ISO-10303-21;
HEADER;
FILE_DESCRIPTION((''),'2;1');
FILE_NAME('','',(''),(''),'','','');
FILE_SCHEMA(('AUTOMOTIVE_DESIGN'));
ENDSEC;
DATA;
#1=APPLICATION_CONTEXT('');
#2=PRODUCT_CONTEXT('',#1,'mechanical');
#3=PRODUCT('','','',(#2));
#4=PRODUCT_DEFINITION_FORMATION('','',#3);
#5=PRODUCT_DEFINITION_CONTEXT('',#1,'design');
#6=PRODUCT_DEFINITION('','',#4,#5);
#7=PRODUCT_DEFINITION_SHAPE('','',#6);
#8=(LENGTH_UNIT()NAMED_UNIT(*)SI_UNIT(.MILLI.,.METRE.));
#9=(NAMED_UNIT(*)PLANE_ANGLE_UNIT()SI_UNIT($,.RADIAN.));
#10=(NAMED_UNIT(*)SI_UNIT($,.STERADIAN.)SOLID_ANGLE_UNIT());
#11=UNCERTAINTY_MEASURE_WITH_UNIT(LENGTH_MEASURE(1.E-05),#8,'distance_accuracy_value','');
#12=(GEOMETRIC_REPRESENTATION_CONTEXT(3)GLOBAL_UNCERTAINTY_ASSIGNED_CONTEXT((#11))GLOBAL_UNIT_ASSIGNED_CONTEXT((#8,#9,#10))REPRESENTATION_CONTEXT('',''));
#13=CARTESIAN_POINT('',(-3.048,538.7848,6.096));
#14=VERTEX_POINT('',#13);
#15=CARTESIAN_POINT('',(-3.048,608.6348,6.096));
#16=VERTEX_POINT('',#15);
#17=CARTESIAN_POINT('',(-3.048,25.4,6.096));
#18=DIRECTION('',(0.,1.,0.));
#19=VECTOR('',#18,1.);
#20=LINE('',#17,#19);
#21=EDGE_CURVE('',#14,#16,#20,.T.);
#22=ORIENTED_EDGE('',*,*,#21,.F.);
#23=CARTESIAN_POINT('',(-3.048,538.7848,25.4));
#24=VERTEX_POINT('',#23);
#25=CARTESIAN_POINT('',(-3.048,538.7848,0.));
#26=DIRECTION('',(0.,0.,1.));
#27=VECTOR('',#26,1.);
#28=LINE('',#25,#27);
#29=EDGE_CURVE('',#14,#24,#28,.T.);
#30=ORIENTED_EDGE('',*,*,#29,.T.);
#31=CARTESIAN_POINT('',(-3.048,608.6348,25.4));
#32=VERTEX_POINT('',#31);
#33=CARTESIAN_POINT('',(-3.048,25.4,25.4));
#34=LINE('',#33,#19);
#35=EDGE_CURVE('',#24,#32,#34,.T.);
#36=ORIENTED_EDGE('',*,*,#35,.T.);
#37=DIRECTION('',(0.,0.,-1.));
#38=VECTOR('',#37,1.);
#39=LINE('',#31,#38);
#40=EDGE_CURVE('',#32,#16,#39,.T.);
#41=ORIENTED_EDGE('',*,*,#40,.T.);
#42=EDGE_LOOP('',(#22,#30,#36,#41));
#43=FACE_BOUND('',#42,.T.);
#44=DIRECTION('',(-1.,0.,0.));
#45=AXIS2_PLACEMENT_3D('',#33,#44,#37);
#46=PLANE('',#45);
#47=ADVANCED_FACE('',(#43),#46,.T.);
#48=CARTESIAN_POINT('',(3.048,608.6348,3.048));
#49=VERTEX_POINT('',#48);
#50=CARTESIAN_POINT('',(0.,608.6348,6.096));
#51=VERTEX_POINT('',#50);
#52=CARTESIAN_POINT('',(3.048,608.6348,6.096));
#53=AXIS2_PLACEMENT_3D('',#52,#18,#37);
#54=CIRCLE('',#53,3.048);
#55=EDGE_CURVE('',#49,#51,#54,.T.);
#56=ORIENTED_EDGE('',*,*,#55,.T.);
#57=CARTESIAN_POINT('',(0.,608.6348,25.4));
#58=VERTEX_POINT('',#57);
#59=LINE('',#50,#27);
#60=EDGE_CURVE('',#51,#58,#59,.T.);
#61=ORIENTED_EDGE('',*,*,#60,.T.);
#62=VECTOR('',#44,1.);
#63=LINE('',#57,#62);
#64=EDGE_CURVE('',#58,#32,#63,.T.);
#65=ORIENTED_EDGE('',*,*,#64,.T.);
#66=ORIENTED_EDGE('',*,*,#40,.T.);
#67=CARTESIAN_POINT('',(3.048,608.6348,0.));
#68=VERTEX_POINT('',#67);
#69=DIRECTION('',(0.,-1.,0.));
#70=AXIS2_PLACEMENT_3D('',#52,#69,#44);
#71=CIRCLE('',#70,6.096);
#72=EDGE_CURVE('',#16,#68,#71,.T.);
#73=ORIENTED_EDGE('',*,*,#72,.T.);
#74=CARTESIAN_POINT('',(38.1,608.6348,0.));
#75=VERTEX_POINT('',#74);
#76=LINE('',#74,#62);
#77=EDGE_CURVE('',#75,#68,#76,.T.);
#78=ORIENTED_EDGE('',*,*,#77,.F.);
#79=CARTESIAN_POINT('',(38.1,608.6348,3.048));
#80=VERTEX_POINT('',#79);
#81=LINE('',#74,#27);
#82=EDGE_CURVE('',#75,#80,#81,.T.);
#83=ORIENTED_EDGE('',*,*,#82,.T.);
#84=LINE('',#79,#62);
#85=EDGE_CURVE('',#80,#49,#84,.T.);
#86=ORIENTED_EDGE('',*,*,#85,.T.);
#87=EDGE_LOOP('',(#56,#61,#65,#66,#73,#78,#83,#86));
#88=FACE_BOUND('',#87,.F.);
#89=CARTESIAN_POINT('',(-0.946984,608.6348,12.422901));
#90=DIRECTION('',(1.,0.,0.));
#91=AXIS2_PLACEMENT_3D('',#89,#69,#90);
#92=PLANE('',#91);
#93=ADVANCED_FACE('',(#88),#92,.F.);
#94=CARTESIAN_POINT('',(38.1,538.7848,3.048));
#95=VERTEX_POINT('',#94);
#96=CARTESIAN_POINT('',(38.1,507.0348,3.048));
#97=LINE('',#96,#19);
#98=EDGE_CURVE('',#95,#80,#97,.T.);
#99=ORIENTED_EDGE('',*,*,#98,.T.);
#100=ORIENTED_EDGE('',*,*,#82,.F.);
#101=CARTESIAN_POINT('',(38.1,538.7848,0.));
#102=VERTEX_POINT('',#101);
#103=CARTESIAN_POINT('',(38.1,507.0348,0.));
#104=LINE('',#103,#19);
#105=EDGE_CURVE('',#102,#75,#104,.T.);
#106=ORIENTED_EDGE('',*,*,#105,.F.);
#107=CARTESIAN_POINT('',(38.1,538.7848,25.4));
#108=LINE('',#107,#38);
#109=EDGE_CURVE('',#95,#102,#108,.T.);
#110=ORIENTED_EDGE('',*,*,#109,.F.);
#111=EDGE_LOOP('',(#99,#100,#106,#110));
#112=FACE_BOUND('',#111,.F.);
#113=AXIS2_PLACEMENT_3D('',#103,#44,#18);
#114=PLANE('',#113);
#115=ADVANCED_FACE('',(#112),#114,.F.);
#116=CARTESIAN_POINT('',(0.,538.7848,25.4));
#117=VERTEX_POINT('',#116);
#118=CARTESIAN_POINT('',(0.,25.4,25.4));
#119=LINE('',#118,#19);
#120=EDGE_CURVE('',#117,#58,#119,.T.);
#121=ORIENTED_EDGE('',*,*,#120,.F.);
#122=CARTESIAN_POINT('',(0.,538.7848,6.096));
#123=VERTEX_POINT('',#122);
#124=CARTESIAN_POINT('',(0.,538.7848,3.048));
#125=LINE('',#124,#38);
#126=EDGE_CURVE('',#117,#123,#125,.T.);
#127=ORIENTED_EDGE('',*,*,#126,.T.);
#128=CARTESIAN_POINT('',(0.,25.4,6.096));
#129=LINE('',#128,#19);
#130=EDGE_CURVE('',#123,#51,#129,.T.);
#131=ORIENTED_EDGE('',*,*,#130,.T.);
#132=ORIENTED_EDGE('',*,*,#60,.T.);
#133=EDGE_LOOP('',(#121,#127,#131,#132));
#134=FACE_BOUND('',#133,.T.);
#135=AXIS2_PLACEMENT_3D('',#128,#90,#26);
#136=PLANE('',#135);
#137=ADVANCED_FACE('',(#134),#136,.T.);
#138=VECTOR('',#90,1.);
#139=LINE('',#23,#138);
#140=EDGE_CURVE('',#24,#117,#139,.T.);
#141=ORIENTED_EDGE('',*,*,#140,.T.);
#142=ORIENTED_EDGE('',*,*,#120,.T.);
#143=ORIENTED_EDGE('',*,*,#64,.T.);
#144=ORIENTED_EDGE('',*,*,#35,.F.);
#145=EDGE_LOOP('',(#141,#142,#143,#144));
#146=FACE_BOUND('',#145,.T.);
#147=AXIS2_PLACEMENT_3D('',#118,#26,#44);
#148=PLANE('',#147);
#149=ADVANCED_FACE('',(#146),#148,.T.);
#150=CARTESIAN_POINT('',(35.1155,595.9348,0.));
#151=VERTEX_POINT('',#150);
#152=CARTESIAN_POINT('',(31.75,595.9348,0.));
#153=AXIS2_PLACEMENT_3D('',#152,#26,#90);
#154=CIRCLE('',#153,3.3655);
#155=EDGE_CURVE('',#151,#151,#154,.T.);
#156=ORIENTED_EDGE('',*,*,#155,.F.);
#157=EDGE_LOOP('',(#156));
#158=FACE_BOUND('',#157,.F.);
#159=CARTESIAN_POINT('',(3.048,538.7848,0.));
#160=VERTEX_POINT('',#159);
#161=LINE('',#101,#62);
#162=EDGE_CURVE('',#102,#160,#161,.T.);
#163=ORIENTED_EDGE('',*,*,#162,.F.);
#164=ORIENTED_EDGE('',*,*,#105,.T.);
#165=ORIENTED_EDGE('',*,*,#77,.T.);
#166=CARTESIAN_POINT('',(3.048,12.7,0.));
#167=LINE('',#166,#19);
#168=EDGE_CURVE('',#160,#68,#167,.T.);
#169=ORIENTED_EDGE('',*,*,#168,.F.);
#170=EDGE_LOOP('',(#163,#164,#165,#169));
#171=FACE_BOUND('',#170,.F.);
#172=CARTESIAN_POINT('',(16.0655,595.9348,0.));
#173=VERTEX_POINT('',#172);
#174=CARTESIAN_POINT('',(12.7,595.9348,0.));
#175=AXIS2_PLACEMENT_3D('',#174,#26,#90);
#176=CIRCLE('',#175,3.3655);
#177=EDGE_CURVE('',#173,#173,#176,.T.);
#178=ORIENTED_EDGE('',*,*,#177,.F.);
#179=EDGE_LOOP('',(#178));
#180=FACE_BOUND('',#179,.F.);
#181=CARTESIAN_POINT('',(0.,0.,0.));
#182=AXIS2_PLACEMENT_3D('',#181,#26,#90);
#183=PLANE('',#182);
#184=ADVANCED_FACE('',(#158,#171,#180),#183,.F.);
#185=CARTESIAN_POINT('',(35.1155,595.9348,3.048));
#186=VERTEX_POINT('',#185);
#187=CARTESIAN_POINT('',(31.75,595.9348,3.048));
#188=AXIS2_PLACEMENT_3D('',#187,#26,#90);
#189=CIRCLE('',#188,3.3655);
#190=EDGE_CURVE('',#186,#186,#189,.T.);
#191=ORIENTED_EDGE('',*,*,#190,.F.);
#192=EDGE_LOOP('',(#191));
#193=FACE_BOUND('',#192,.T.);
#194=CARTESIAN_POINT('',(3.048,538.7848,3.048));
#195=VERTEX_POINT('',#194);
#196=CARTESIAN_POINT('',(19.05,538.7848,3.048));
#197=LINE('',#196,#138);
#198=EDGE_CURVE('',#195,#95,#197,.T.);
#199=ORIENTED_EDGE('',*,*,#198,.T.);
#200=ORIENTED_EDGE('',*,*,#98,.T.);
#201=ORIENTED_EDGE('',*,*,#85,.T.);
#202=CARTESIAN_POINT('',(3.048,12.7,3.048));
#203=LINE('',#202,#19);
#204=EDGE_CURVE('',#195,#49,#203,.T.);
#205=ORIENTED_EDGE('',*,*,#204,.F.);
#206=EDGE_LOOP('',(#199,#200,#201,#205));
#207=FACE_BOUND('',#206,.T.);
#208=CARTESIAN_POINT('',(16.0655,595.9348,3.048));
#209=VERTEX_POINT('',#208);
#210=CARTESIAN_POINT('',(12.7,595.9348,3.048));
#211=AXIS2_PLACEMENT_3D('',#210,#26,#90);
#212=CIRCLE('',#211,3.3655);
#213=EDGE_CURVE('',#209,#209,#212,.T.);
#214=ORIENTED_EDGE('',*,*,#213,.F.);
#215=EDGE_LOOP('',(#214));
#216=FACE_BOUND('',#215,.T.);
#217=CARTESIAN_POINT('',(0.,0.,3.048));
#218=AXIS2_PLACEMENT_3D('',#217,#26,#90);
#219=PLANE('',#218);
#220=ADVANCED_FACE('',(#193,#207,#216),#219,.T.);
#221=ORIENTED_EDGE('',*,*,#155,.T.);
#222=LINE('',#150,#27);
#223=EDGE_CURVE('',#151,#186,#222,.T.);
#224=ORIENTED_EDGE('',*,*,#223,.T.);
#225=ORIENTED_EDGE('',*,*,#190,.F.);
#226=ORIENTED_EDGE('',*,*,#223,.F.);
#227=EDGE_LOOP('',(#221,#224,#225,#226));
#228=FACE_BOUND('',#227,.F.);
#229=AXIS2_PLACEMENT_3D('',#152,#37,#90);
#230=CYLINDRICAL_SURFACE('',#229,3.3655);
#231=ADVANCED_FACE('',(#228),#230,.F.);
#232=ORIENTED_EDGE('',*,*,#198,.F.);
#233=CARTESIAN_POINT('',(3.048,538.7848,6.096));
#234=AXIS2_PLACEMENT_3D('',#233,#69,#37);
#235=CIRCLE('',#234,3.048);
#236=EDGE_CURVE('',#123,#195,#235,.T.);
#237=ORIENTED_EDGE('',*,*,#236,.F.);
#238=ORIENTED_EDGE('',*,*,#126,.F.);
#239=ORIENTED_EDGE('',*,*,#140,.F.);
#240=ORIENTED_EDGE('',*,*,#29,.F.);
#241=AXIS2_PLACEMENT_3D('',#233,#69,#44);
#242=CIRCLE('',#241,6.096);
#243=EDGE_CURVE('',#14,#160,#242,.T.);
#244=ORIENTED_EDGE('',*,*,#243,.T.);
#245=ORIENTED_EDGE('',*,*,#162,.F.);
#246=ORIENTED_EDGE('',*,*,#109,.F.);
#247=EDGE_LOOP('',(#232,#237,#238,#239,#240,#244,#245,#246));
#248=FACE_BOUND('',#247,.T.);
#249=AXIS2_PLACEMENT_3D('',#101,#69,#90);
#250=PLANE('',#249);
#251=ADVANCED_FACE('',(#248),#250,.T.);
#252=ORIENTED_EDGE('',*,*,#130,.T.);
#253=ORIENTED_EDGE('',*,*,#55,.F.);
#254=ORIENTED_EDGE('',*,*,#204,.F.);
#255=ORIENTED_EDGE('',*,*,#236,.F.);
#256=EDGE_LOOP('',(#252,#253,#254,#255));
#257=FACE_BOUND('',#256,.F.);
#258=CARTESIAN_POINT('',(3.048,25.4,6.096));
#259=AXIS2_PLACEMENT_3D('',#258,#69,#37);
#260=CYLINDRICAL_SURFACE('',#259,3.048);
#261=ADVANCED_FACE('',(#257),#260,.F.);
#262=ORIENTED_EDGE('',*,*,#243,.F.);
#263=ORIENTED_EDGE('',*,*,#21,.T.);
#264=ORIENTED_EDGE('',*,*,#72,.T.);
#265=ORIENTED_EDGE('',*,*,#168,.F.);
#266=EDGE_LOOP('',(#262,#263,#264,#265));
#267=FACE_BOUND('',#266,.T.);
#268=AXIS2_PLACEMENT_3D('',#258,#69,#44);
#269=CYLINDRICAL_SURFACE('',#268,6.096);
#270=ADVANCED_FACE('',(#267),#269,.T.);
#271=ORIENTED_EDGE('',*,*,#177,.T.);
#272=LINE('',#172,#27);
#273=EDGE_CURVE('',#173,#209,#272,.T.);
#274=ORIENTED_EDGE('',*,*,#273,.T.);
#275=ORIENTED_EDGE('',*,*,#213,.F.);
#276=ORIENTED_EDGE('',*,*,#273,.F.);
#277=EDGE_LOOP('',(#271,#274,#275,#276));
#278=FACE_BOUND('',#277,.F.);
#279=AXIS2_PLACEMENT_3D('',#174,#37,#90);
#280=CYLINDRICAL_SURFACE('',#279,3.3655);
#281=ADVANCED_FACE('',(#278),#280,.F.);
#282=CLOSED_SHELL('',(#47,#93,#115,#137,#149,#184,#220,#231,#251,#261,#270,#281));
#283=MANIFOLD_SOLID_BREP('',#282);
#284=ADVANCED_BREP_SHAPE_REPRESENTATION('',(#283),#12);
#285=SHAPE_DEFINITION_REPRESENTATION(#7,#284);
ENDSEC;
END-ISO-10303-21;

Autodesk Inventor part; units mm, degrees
ref_plane "YZ Plane" through (0, 0, 0) normal (1, 0, 0) x (0, 1, 0)
ref_plane "XZ Plane" through (0, 0, 0) normal (0, 1, 0) x (-1, 0, 0)
ref_plane "XY Plane" through (0, 0, 0) normal (0, 0, 1) x (1, 0, 0)
sketch "Sketch1" plane through (0, 0, 0) normal (0, 0, 1) x (1, 0, 0)
  line L0 (0, 0) -> (38.1, 0)
  line L1 (38.1, 0) -> (38.1, 253.0348)
  arc A0 (38.1, 507.0348) -> (38.1, 253.0348) centre (666.75, 380.0348) ccw
  line L2 (38.1, 507.0348) -> (38.1, 608.6348)
  line L3 (38.1, 608.6348) -> (0, 608.6348)
  line L4 (0, 608.6348) -> (0, 0)
  circle A1 centre (31.75, 151.4348) radius 3.3655
  circle A2 centre (31.75, 34.671) radius 3.3655
  circle A3 centre (12.7, 12.7) radius 3.3655
  circle A4 centre (12.7, 342.9) radius 3.3655
  circle A5 centre (12.7, 595.9348) radius 3.3655
  circle A6 centre (31.75, 12.7) radius 3.3655
  circle A7 centre (31.75, 253.0348) radius 3.3655
  circle A8 centre (31.75, 507.0348) radius 3.3655
  circle A9 centre (31.75, 595.9348) radius 3.3655
  line L5 (0, 557.8348) -> (0, 608.6348)
  line L6 (0, 50.8) -> (0, 0)
  line L7 (12.7, 342.9) -> (0, 304.3174) construction
  line L8 (0, 317.5) -> (0, 368.3)
  line L9 (0, 129.921) -> (12.7, 129.921) construction
  circle A10 centre (12.7, 129.921) radius 3.3655
  circle A11 centre (12.7, 174.371) radius 3.3655
  line L10 (9.3413, 197.482) -> (9.3413, 204.213)
  line L11 (16.0611, 204.488) -> (16.0611, 197.3435)
  arc A12 (16.0611, 204.488) -> (9.3413, 204.213) centre (12.6956, 204.488) ccw
  arc A13 (9.3413, 197.482) -> (16.0611, 197.3435) centre (12.6974, 197.231) ccw
  circle A14 centre (12.7, 217.188) radius 3.3655
  dimension "d0" = 38.1
  dimension "d2" = 101.6
  dimension "d4" = 457.2
  dimension "d5" = 101.6
  dimension "d6" = 666.75
  dimension "d7" = 641.35
  dimension "d9" = 116.7638
  dimension "d10" = 6.35
  dimension "d11" = 6.35
  dimension "d13" = 12.7
  dimension "d14" = 12.7
  dimension "d16" = 12.7
  dimension "d17" = 342.9
  dimension "d19" = 12.7
  dimension "d20" = 12.7
  dimension "d22" = 6.35
  dimension "d24" = 6.35
  dimension "d25" = 6.731
  dimension "d26" = 6.35
  dimension "hole" = 6.731
  dimension "d28" = 6.35
  dimension "d45" = 12.7
  dimension "d47" = 12.7
  dimension "d54" = 6.731
  dimension "d55" = 3.3655
  dimension "d56" = 3.3655
  dimension "d58" = 6.731
  dimension "d59" = 12.7
  dimension "d68" = 18.22
  dimension "d69" = 90
  dimension "d70" = 90
  dimension "d71" = 22.0389
  dimension "d72" = 28.7587
  dimension "d73" = 478.7138
  dimension "d74" = 6.35
  dimension "d75" = 6.35
  dimension "d76" = 595.9348
  dimension "d77" = 404.1468
  dimension "d78" = 411.2913
  dimension "d79" = 25.4
  dimension "d80" = 25.4
  dimension "d81" = 434.2638
  dimension "d82" = 50.8
  dimension "d83" = 240.3348
  dimension "d84" = 291.1348
  dimension "d85" = 557.8348
extrude "Plate4" add sketch "Sketch1" along normal blind 3.048
sketch "Sketch5" plane through (0, 0, 3.048) normal (0, 0, 1) x (1, 0, 0)
  line L0 (38.1, 0) -> (38.1, 253.0348) projected
  line L1 (0, 0) -> (38.1, 0)
  line L2 (38.1, 0) -> (38.1, 25.4)
  line L3 (38.1, 25.4) -> (0, 25.4)
  line L4 (0, 25.4) -> (0, 0)
  dimension "d96" = 25.4
extrude "Cut1" cut sketch "Sketch5" against normal blind 3.048
sketch "Sketch7" plane through (0, 25.4, 3.048) normal (-1, 0, 0) x (0, -1, 0)
  line L0 (-583.2348, 0) -> (0, 0)
  line L1 (0, 0) -> (0, 22.352)
  line L2 (0, 22.352) -> (-583.2348, 22.352)
  line L3 (-583.2348, 22.352) -> (-583.2348, 0)
edge flange "Flange3" height 25.4 angle 90 thickness 3.048 bend radius 3.048 thickness toward (-1, 0, 0) relief tear relief width 3.048 relief depth 1.524 edges at (0, 317.0174, 3.048) wall of the first edge with corners at (0, 608.6348, 3.048) (0, 25.4, 3.048) (0, 25.4, 25.4) (0, 608.6348, 25.4)
bend "Bend3"
corner "Corner3"
sketch "Sketch9" plane through (38.1, 25.4, 0) normal (0, -1, 0) x (1, 0, 0)
  line L0 (0, 0) -> (-41.148, 0)
  line L1 (-41.148, 0) -> (-41.148, 25.4)
  line L2 (-41.148, 25.4) -> (0, 25.4)
  line L3 (0, 25.4) -> (0, 0)
  point P0 (-38.1, 0)
extrude "Extrusion2" cut sketch "Sketch9" against normal blind 513.3848
equation "\"d25\" = hole"
equation "\"d97\" = Thickness"
equation "\"d109\" = BendReliefWidth"
equation "\"d110\" = BendReliefDepth"
equation "\"d111\" = MinimumRemnant"
equation "\"d112\" = BendRadius"
equation "\"d115\" = BendRadius"
equation "\"d116\" = CornerReliefSize"
equation "\"d117\" = GapSize"
equation "\"d118\" = JacobiRadiusSize"
equation "\"BendRadius\" = Thickness"
equation "\"BendReliefWidth\" = Thickness"
equation "\"BendReliefDepth\" = 0.5 * Thickness"
equation "\"CornerReliefSize\" = 4 * Thickness"
equation "\"MinimumRemnant\" = 2 * Thickness"
equation "\"TransitionRadius\" = BendRadius"
equation "\"JacobiRadiusSize\" = BendRadius"
equation "\"GapSize\" = Thickness"
equation "\"d29\" = BendRadius"
equation "\"d32\" = BendRadius"
equation "\"d38\" = BendRadius"
equation "\"d60\" = BendRadius"
equation "\"Thickness\" = 3.048"
properties part number "Claw - Arm - Top (R) Top"
